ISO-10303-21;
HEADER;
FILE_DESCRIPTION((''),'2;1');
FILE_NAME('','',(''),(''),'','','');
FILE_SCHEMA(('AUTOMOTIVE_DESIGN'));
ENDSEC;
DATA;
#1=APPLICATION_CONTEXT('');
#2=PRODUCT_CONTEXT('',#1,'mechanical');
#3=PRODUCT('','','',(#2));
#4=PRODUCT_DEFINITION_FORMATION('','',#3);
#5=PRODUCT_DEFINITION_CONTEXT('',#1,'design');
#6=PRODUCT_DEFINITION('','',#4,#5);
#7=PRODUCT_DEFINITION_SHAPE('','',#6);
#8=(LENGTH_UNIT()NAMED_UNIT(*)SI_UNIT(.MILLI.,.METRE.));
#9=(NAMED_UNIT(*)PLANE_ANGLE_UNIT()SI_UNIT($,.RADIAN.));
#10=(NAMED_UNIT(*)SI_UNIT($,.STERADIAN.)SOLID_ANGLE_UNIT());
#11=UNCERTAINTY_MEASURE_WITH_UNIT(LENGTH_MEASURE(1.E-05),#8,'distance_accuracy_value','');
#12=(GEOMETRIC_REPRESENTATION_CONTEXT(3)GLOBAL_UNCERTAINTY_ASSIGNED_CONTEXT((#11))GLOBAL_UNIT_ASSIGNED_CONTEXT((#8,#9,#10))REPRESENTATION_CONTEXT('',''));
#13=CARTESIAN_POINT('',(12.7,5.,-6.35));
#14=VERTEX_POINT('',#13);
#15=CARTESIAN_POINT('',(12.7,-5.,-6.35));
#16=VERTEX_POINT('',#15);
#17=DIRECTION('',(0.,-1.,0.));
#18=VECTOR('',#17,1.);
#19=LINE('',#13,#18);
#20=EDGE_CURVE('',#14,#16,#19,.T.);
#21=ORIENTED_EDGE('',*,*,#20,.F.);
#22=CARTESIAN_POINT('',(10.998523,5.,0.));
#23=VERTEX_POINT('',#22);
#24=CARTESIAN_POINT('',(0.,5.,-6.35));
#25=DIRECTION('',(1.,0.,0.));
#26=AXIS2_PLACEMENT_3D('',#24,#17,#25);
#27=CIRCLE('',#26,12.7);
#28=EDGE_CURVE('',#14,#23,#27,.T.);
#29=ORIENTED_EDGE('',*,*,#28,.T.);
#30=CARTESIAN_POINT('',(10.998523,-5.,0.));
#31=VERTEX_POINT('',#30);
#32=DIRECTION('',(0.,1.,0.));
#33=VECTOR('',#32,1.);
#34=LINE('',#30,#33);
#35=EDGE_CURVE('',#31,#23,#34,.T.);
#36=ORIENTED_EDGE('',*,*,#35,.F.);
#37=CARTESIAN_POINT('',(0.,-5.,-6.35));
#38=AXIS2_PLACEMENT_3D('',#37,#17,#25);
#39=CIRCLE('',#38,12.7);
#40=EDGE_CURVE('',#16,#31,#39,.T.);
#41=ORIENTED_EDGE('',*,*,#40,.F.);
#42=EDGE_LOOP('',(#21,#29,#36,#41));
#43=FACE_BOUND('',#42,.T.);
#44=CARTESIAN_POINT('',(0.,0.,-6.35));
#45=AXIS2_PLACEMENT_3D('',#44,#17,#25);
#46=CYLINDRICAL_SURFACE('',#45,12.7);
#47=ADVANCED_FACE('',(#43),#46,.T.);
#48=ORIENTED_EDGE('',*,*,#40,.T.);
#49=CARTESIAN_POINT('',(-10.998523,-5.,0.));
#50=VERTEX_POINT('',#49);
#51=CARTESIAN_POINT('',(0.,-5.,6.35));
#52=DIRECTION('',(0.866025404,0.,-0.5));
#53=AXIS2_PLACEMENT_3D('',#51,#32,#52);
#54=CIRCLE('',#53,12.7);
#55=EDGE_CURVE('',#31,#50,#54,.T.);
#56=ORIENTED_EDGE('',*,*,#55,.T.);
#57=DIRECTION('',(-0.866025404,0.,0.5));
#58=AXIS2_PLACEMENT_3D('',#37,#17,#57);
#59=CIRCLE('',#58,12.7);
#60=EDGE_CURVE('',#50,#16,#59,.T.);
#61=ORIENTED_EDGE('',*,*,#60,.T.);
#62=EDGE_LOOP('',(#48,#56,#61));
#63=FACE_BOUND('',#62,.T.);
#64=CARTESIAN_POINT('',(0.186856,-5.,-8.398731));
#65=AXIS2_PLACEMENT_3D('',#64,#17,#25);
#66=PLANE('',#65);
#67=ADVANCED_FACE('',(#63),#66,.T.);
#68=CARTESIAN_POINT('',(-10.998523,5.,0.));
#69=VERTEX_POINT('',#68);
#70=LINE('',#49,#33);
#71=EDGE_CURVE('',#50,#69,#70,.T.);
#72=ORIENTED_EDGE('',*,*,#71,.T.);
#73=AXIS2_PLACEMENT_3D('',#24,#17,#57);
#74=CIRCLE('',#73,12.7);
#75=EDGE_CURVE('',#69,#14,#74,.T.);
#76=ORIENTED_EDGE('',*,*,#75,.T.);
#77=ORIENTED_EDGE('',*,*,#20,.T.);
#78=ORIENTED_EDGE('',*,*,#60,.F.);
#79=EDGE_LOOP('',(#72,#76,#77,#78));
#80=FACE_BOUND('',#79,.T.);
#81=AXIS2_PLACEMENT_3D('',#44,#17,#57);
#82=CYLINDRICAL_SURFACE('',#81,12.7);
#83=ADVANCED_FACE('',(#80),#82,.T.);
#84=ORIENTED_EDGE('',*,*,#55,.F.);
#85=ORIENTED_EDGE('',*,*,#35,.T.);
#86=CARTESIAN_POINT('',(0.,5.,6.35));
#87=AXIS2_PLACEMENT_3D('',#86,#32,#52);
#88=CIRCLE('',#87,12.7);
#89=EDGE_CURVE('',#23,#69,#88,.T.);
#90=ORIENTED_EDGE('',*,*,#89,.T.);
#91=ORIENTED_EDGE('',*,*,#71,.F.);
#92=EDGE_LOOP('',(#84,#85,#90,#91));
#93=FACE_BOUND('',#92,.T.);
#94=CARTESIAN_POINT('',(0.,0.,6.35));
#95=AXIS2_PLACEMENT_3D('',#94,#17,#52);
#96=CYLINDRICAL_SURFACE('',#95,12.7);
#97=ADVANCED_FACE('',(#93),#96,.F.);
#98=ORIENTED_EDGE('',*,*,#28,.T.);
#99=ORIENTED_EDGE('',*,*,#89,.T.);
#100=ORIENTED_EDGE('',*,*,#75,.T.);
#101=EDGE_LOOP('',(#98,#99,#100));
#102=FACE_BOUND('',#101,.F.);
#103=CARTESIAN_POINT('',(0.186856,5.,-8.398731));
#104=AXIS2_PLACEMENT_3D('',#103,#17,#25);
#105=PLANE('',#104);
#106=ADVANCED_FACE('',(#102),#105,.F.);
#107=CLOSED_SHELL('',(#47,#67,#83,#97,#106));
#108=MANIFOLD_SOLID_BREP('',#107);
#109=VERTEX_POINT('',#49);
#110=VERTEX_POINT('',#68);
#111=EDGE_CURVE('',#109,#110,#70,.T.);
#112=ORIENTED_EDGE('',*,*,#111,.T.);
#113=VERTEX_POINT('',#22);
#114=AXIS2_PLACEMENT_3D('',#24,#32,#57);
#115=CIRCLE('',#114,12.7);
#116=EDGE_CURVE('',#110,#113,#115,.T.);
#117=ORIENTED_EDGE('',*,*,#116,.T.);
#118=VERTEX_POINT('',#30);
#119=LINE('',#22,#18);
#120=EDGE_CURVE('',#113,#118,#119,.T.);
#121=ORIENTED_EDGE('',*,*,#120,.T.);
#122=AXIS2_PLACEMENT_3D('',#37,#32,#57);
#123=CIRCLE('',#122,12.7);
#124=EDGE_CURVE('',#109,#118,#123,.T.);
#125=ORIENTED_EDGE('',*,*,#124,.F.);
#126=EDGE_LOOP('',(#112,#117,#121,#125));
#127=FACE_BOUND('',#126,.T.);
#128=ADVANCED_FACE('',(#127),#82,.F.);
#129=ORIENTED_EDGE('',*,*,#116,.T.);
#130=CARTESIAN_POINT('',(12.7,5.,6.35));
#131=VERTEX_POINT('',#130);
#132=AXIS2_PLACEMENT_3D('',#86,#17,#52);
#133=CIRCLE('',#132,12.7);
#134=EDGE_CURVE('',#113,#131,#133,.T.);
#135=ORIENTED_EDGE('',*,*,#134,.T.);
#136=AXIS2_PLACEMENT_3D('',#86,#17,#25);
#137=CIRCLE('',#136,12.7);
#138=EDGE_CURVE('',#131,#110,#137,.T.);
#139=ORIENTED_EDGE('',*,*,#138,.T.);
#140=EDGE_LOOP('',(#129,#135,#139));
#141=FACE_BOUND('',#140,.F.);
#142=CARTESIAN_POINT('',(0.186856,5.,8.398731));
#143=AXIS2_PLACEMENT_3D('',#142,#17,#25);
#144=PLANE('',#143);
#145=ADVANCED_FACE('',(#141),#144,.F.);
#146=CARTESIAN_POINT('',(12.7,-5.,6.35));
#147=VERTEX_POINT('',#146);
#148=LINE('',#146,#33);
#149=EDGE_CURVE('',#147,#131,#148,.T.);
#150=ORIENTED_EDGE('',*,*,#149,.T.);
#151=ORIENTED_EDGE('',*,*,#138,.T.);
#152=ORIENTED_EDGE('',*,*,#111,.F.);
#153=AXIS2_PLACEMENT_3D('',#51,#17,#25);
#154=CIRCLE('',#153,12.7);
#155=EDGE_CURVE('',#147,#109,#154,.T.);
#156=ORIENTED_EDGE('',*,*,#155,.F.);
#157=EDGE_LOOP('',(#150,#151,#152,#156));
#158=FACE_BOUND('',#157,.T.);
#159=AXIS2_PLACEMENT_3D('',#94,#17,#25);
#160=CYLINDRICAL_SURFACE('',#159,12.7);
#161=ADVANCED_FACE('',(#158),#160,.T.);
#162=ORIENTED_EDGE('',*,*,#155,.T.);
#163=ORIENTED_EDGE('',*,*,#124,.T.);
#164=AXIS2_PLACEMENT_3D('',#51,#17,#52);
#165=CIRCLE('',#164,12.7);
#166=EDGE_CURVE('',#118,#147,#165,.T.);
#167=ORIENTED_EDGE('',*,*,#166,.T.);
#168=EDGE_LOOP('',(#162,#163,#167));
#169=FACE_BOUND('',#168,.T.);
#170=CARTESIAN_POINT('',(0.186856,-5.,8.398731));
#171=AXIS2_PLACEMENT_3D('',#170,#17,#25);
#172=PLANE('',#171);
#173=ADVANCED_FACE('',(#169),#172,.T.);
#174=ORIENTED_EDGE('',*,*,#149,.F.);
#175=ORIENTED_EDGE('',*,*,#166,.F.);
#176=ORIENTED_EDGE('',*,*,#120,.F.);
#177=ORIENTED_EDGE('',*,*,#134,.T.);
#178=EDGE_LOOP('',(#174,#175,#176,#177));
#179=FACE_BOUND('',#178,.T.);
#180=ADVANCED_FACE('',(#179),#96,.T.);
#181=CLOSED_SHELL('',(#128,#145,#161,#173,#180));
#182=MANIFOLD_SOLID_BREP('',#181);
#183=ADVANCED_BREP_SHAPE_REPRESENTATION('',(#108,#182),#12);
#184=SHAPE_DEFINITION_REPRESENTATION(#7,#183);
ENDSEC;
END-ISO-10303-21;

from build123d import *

# Parameters (mm, degrees)
F1_DEPTH = 5


with BuildPart() as f1:
    # F0 (on Front) → F1 (new body, symmetric)
    with BuildSketch(Plane.XZ):
        with BuildLine():
            ThreePointArc((-10.9985226281, 0), (-3.2870018728, -18.6172579939), (12.7, -6.35))
            ThreePointArc((12.7, -6.35), (12.2672579939, -3.0629981272), (10.9985226281, 0))
            ThreePointArc((10.9985226281, 0), (0, -6.35), (-10.9985226281, 0))
        make_face()
    extrude(amount=F1_DEPTH, both=True)


with BuildPart() as f1b:
    # F0 (on Front) → F1, piece 2 (new body, symmetric)
    with BuildSketch(Plane.XZ):
        with BuildLine():
            ThreePointArc((-10.9985226281, 0), (0, 6.35), (10.9985226281, 0))
            ThreePointArc((10.9985226281, 0), (12.2672579939, 3.0629981272), (12.7, 6.35))
            ThreePointArc((12.7, 6.35), (-3.2870018728, 18.6172579939), (-10.9985226281, 0))
        make_face()
    extrude(amount=F1_DEPTH, both=True)


solid = Compound([f1.part, f1b.part])
